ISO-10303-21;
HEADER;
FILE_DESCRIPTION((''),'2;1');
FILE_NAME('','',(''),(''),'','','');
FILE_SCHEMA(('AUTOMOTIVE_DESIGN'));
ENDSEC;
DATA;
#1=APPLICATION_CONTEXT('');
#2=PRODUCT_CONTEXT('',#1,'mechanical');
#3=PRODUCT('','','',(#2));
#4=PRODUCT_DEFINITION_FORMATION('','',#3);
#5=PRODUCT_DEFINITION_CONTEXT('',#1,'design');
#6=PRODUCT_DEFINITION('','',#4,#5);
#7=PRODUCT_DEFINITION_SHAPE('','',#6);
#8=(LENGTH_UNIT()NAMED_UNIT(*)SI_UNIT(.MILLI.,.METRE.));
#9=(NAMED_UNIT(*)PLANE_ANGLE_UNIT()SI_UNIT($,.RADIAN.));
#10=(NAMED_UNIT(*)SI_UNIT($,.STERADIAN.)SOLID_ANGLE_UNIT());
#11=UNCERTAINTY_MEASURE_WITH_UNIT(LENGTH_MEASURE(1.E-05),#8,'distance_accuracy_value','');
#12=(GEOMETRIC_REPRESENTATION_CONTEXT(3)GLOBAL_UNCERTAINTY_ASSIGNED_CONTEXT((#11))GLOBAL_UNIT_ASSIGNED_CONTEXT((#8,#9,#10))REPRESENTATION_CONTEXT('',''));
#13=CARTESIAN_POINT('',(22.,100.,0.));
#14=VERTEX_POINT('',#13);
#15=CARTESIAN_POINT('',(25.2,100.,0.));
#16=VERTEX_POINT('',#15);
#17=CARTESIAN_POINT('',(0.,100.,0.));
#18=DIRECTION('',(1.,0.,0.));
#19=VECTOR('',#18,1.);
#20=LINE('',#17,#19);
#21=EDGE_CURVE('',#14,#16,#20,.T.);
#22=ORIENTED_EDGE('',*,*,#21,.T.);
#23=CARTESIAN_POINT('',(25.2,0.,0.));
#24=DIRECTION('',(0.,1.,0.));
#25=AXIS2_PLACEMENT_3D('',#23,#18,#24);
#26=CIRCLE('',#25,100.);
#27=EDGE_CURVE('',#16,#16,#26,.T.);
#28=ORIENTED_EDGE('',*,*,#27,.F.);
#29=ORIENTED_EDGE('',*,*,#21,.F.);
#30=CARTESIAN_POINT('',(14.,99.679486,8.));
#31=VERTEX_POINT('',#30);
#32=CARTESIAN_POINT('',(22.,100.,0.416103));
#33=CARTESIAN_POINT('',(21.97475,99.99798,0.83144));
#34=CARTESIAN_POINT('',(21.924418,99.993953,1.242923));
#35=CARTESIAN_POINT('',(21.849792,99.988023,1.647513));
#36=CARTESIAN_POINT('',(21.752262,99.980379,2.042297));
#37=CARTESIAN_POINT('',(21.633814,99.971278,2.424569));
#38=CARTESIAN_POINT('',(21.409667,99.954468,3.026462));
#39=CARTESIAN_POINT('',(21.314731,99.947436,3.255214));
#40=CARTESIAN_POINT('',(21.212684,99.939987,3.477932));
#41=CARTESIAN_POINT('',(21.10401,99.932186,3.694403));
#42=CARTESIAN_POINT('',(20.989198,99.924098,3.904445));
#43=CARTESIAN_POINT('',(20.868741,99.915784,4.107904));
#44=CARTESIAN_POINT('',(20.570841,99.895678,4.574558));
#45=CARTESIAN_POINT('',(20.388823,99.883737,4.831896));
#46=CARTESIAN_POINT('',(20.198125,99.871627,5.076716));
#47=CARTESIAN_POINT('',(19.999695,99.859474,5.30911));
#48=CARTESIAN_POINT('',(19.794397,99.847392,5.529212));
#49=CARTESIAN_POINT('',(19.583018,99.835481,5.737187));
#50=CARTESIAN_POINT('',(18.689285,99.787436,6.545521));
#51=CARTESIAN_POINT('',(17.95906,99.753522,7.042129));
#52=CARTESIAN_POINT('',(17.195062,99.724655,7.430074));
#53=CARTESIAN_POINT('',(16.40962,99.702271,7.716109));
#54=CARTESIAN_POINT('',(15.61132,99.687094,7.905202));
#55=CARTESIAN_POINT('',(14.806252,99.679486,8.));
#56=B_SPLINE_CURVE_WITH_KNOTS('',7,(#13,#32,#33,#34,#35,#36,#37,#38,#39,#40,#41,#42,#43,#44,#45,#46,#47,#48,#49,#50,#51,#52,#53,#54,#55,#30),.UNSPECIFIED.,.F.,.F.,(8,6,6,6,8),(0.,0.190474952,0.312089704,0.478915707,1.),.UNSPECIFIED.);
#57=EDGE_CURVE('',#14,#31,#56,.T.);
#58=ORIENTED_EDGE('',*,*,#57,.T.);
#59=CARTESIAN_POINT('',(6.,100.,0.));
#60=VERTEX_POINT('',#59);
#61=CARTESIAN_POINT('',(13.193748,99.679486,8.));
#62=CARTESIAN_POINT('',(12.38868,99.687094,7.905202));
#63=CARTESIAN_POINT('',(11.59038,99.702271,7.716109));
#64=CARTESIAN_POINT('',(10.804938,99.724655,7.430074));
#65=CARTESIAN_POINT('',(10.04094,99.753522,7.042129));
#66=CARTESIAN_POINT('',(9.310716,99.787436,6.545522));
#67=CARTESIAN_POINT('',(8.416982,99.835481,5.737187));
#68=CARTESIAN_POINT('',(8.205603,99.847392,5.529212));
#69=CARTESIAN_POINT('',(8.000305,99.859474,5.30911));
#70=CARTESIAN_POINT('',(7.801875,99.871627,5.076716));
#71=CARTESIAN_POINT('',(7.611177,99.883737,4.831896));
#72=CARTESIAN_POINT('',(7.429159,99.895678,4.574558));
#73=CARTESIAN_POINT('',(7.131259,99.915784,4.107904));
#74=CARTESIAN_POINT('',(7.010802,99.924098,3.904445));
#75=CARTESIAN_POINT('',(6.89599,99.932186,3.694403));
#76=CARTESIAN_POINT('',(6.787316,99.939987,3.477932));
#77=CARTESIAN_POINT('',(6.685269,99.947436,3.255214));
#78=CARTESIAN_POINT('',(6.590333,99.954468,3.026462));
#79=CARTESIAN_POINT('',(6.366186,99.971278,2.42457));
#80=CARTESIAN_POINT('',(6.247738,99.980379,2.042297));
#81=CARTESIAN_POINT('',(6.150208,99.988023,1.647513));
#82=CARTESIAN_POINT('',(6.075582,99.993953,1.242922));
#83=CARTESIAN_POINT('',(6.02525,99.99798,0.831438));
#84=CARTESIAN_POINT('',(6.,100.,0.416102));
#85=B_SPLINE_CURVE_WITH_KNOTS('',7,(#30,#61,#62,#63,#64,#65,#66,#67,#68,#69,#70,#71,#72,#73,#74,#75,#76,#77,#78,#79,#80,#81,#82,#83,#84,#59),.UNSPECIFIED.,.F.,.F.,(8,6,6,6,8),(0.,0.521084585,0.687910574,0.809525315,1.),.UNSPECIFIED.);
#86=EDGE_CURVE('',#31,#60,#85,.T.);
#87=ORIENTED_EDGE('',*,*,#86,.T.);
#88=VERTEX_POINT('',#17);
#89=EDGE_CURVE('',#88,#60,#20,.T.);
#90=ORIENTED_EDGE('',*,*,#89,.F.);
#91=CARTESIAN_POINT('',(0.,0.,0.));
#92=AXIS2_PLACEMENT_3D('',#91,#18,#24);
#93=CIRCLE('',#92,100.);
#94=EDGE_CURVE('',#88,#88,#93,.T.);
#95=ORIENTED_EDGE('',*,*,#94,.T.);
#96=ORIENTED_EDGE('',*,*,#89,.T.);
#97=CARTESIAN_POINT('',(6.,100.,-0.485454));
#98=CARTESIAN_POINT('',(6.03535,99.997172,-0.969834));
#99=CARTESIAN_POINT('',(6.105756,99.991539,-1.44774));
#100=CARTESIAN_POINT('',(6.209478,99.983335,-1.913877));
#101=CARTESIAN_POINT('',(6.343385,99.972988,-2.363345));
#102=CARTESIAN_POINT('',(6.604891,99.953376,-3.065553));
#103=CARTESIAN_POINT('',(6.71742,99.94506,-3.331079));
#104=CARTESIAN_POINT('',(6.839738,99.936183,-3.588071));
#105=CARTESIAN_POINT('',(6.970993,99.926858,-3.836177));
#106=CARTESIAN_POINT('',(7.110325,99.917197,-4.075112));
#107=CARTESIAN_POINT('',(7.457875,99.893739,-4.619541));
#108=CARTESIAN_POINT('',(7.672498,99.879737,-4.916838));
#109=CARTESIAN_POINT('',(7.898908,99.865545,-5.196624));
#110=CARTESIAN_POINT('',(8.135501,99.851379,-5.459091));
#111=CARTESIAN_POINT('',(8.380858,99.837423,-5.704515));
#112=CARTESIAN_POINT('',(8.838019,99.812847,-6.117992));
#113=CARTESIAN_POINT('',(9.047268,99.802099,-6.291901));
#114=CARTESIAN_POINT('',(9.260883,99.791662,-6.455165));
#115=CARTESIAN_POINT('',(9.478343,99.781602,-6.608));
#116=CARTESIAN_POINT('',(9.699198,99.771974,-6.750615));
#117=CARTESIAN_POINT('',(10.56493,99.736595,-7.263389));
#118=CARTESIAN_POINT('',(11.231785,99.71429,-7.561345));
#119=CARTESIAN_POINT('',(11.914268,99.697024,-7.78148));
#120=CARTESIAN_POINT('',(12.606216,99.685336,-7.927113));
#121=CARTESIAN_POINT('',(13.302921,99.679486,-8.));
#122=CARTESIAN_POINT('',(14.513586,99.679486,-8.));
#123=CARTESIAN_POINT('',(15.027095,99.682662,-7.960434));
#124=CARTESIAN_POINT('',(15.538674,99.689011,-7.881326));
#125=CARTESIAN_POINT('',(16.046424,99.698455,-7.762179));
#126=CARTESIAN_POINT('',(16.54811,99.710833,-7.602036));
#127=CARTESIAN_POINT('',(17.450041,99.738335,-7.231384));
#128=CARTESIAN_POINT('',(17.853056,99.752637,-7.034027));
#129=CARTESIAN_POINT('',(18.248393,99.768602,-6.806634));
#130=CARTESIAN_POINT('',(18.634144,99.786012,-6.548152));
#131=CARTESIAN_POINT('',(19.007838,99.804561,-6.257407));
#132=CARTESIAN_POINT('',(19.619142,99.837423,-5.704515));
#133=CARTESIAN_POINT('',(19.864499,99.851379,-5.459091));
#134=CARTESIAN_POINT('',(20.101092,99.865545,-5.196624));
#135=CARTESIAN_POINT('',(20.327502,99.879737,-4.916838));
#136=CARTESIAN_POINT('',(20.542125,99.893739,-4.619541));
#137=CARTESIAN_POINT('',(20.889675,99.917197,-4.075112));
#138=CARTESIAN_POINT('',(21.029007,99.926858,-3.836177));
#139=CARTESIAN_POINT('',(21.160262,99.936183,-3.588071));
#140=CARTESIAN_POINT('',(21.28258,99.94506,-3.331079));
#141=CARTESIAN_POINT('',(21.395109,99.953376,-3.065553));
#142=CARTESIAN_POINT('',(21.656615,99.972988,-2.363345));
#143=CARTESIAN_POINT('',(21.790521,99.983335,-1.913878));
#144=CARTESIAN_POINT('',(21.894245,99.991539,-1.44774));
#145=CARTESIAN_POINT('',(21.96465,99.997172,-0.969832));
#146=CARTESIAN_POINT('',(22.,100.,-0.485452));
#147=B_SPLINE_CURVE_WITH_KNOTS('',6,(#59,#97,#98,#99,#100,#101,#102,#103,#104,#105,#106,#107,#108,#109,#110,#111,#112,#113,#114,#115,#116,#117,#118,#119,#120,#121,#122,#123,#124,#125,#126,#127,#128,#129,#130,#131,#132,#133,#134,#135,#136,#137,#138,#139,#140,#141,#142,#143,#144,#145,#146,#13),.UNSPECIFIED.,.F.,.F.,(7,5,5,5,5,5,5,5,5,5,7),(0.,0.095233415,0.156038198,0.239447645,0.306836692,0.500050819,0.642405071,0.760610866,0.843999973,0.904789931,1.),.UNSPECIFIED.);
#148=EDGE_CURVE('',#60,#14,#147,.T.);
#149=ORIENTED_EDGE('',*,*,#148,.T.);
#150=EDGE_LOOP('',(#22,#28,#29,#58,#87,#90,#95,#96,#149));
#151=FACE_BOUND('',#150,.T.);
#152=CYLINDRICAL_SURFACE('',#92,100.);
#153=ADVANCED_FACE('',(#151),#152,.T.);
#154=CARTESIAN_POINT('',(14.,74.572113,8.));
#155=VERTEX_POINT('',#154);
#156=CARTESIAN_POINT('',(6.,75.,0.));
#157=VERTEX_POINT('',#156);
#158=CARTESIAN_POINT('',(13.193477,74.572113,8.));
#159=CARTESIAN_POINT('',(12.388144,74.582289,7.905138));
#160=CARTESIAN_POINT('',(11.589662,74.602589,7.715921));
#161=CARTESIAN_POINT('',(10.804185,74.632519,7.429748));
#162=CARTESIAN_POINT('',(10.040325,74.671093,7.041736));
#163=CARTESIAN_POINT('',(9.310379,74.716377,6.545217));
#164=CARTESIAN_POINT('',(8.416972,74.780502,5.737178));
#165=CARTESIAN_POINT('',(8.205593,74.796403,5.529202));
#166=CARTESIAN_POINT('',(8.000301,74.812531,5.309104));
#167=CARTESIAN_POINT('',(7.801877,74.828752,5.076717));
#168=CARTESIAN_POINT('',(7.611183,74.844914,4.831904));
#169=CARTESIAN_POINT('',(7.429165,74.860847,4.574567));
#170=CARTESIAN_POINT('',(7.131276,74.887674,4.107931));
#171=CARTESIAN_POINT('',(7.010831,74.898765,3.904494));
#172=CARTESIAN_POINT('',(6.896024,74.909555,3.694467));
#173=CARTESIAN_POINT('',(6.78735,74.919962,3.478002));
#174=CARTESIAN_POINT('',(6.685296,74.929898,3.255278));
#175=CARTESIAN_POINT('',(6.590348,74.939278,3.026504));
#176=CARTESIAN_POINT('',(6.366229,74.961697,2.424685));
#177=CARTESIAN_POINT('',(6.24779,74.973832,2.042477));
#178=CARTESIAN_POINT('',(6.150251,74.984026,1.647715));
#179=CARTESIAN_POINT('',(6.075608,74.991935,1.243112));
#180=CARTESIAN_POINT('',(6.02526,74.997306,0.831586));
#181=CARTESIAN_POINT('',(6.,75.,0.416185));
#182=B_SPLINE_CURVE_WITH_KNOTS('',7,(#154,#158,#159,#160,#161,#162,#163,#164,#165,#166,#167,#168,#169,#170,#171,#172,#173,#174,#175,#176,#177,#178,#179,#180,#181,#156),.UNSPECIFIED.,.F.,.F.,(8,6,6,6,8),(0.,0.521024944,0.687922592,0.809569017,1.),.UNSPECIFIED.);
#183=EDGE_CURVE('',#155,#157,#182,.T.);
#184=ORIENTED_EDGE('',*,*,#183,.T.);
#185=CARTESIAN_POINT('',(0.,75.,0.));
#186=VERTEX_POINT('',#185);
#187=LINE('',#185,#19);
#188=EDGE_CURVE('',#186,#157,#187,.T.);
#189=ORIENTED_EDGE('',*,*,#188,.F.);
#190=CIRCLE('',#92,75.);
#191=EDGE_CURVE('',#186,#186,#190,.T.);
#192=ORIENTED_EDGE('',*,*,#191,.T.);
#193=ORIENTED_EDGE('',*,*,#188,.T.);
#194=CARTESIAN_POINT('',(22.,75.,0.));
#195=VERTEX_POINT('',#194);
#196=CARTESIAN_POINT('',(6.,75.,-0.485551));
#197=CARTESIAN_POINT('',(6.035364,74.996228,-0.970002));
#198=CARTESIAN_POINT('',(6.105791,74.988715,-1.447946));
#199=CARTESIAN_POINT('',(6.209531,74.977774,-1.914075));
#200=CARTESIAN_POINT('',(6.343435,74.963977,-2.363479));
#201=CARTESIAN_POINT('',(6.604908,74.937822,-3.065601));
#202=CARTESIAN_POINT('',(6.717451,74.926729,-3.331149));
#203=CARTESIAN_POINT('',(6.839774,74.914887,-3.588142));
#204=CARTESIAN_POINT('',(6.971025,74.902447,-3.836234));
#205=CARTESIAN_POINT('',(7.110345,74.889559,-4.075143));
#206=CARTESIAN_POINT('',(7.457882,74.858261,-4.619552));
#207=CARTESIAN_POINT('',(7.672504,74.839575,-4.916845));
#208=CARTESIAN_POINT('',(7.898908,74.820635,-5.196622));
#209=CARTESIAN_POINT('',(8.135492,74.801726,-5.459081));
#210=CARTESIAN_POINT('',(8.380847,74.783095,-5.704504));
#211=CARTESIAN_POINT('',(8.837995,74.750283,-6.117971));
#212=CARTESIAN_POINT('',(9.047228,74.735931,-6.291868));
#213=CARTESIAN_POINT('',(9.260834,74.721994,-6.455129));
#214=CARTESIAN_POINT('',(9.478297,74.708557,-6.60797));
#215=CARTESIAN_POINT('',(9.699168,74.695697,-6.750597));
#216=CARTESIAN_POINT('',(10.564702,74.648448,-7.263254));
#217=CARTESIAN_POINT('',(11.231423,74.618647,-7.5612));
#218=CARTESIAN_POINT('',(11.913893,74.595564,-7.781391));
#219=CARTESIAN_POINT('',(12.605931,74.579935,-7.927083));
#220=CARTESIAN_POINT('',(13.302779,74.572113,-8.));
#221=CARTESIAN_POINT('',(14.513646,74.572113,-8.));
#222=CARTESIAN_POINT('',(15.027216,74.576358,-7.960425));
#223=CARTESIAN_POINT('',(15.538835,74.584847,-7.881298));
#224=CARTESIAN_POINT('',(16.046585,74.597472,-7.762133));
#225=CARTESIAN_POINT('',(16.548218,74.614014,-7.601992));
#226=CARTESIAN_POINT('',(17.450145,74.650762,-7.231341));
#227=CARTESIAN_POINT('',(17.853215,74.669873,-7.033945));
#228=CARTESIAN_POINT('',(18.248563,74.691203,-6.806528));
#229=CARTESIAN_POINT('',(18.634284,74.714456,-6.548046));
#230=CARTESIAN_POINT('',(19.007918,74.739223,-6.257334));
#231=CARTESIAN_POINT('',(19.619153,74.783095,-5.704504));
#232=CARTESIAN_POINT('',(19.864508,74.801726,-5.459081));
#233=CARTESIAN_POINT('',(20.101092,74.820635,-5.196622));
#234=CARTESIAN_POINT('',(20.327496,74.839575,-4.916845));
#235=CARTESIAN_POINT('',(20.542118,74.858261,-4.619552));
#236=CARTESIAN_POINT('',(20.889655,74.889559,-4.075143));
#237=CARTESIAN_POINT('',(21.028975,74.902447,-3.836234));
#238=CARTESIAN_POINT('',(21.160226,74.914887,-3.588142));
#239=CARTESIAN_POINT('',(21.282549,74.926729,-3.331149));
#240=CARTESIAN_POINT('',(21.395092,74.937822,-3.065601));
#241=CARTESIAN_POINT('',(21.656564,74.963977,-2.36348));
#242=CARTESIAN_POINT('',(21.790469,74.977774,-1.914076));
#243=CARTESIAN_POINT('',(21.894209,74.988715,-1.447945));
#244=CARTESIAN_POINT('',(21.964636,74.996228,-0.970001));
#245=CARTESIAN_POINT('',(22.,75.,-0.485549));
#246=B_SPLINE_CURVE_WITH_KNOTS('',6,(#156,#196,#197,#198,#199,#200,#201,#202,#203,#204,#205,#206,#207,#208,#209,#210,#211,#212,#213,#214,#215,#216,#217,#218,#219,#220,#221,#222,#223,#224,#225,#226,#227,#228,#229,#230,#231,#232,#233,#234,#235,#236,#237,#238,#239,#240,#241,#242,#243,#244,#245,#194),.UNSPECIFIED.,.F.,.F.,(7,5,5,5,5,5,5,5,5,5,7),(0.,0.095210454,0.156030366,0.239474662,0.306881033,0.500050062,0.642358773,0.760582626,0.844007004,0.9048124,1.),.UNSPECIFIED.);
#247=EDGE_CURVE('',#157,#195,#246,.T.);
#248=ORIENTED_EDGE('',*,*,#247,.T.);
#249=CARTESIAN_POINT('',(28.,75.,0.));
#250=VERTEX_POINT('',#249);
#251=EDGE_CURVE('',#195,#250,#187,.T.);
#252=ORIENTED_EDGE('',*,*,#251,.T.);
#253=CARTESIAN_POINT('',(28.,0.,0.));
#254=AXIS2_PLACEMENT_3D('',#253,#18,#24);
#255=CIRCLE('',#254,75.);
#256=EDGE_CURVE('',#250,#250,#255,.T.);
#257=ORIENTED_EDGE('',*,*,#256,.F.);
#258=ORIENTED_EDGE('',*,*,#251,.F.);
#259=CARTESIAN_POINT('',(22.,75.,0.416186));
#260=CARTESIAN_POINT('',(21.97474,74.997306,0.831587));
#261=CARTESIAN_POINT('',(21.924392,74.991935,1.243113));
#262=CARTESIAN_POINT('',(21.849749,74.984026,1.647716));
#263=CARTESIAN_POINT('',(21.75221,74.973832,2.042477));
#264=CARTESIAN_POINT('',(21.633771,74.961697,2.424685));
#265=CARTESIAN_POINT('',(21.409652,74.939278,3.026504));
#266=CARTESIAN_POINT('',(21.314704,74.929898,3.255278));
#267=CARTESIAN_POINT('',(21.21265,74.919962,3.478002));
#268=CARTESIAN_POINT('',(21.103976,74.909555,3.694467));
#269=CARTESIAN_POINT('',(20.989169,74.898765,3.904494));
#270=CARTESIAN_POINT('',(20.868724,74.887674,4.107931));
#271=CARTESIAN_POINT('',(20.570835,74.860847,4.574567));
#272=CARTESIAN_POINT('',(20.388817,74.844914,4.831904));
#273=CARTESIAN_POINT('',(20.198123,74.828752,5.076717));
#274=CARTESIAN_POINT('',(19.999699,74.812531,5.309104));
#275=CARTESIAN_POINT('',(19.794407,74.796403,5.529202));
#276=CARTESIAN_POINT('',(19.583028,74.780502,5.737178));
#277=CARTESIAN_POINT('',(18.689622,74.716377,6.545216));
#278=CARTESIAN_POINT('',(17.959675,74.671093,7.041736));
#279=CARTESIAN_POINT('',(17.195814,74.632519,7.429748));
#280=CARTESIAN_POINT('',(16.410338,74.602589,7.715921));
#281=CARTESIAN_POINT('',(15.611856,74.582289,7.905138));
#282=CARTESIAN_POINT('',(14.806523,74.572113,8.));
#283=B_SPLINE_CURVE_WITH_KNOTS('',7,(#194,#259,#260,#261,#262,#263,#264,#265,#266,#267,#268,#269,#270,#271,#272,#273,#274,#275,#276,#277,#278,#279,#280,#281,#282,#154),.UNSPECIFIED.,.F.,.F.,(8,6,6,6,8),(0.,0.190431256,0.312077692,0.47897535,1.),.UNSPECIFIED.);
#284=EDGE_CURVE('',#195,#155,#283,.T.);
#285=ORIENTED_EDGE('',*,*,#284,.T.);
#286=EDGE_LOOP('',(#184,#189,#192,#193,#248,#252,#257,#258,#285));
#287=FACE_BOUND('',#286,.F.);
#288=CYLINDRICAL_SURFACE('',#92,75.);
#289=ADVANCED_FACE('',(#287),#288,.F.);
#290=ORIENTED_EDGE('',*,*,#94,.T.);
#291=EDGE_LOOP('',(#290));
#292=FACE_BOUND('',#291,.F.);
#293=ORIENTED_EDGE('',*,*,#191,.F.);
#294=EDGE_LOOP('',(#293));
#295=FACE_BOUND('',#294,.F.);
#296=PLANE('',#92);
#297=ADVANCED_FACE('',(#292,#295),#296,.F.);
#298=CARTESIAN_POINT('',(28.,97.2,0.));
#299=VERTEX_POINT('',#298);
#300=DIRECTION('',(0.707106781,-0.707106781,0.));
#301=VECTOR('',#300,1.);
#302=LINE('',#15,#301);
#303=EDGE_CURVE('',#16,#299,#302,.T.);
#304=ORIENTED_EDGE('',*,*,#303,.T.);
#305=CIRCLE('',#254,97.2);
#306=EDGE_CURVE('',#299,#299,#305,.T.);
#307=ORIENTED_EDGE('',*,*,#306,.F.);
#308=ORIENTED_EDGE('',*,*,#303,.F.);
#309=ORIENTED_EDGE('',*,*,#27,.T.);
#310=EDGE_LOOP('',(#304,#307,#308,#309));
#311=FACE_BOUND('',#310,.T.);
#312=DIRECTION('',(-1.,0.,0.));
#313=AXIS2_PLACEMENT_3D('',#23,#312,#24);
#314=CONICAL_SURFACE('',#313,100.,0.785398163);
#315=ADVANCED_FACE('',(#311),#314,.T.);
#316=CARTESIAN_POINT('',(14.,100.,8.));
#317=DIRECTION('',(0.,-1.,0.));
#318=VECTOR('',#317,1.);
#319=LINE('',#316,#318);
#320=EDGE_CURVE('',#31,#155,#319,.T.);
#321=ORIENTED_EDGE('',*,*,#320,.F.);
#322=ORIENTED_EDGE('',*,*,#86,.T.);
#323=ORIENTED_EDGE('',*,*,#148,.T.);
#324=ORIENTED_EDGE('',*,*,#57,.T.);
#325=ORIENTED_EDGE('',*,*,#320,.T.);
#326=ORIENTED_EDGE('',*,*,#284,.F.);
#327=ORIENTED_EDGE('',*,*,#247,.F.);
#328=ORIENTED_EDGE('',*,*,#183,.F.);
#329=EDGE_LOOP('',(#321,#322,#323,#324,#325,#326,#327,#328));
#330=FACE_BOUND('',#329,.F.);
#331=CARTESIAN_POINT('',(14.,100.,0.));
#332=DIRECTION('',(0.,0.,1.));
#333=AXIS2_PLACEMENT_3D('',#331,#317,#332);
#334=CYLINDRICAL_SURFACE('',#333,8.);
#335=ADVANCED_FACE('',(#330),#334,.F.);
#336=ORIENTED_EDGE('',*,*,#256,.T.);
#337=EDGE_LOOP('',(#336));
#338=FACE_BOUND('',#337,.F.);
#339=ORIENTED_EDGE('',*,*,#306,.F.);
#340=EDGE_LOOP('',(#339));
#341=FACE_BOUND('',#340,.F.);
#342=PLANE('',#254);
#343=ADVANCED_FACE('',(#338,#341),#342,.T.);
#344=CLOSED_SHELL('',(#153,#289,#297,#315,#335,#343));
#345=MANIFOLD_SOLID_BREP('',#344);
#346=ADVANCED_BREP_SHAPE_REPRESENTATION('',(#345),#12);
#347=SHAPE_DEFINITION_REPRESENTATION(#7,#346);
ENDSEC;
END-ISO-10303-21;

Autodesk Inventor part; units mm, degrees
ref_plane "YZ Plane" through (0, 0, 0) normal (1, 0, 0) x (0, 1, 0)
ref_plane "XZ Plane" through (0, 0, 0) normal (0, 1, 0) x (-1, 0, 0)
sketch "Szkic1" plane through (0, 0, 0) normal (0, 0, 1) x (1, 0, 0)
  line L0 (0, 100) -> (28, 100)
  line L1 (-1.9497, 0) -> (21.5466, 0)
  line L2 (0, 100) -> (0, 75)
  line L3 (0, 75) -> (28, 75)
  line L4 (28, 75) -> (28, 100)
  line L5 (-6.6489, 0) -> (26.2458, 0) projected
  line L6 (0, 48) -> (0, -8) projected
  dimension "d0" = 200
  dimension "d1" = 150
  dimension "d2" = 28
revolve "Bryła" add sketch "Szkic1" angle 360 about axis through (-1.9497, 0, 0) along (1, 0, 0)
ref_plane "IDS_WORKPLANE{1}" through (0, 100, 0) normal (0, 1, 0) x (-1, 0, 0)
sketch "Szkic2" plane through (0, 100, 0) normal (0, 1, 0) x (-1, 0, 0)
  line L0 (0, 100) -> (0, -100) projected
  line L1 (-10.8, 0) -> (1.8, 0) projected
  point P0 (-14, 0)
  dimension "d7" = 14
hole "Otwór1" at (14, 100, 0) direction (0, -1, 0) diameter 16 end up to surface
chamfer "Faza1" distance 2.8 angle 45 1 edges at (28, -100, 0) measured on face at (9.3333, 87.1784, -48.989)
equation "\"d7\" = 0.5 * SD"
equation "\"d8\" = NND"
equation "\"d4\" = PHH"
equation "\"d5\" = FAWI"
equation "\"d22\" = PHH"
equation "\"d0\" = SD2"
equation "\"d1\" = WND"
equation "\"d2\" = SD"
equation "\"WND\" = 150"
equation "\"SD2\" = 200"
equation "\"SD\" = 28"
equation "\"NND\" = 16"
equation "\"FAWI\" = 45deg"
equation "\"PHH\" = 2.8"
properties part number "DIN 705 - B150" material "Stal, miękka"
